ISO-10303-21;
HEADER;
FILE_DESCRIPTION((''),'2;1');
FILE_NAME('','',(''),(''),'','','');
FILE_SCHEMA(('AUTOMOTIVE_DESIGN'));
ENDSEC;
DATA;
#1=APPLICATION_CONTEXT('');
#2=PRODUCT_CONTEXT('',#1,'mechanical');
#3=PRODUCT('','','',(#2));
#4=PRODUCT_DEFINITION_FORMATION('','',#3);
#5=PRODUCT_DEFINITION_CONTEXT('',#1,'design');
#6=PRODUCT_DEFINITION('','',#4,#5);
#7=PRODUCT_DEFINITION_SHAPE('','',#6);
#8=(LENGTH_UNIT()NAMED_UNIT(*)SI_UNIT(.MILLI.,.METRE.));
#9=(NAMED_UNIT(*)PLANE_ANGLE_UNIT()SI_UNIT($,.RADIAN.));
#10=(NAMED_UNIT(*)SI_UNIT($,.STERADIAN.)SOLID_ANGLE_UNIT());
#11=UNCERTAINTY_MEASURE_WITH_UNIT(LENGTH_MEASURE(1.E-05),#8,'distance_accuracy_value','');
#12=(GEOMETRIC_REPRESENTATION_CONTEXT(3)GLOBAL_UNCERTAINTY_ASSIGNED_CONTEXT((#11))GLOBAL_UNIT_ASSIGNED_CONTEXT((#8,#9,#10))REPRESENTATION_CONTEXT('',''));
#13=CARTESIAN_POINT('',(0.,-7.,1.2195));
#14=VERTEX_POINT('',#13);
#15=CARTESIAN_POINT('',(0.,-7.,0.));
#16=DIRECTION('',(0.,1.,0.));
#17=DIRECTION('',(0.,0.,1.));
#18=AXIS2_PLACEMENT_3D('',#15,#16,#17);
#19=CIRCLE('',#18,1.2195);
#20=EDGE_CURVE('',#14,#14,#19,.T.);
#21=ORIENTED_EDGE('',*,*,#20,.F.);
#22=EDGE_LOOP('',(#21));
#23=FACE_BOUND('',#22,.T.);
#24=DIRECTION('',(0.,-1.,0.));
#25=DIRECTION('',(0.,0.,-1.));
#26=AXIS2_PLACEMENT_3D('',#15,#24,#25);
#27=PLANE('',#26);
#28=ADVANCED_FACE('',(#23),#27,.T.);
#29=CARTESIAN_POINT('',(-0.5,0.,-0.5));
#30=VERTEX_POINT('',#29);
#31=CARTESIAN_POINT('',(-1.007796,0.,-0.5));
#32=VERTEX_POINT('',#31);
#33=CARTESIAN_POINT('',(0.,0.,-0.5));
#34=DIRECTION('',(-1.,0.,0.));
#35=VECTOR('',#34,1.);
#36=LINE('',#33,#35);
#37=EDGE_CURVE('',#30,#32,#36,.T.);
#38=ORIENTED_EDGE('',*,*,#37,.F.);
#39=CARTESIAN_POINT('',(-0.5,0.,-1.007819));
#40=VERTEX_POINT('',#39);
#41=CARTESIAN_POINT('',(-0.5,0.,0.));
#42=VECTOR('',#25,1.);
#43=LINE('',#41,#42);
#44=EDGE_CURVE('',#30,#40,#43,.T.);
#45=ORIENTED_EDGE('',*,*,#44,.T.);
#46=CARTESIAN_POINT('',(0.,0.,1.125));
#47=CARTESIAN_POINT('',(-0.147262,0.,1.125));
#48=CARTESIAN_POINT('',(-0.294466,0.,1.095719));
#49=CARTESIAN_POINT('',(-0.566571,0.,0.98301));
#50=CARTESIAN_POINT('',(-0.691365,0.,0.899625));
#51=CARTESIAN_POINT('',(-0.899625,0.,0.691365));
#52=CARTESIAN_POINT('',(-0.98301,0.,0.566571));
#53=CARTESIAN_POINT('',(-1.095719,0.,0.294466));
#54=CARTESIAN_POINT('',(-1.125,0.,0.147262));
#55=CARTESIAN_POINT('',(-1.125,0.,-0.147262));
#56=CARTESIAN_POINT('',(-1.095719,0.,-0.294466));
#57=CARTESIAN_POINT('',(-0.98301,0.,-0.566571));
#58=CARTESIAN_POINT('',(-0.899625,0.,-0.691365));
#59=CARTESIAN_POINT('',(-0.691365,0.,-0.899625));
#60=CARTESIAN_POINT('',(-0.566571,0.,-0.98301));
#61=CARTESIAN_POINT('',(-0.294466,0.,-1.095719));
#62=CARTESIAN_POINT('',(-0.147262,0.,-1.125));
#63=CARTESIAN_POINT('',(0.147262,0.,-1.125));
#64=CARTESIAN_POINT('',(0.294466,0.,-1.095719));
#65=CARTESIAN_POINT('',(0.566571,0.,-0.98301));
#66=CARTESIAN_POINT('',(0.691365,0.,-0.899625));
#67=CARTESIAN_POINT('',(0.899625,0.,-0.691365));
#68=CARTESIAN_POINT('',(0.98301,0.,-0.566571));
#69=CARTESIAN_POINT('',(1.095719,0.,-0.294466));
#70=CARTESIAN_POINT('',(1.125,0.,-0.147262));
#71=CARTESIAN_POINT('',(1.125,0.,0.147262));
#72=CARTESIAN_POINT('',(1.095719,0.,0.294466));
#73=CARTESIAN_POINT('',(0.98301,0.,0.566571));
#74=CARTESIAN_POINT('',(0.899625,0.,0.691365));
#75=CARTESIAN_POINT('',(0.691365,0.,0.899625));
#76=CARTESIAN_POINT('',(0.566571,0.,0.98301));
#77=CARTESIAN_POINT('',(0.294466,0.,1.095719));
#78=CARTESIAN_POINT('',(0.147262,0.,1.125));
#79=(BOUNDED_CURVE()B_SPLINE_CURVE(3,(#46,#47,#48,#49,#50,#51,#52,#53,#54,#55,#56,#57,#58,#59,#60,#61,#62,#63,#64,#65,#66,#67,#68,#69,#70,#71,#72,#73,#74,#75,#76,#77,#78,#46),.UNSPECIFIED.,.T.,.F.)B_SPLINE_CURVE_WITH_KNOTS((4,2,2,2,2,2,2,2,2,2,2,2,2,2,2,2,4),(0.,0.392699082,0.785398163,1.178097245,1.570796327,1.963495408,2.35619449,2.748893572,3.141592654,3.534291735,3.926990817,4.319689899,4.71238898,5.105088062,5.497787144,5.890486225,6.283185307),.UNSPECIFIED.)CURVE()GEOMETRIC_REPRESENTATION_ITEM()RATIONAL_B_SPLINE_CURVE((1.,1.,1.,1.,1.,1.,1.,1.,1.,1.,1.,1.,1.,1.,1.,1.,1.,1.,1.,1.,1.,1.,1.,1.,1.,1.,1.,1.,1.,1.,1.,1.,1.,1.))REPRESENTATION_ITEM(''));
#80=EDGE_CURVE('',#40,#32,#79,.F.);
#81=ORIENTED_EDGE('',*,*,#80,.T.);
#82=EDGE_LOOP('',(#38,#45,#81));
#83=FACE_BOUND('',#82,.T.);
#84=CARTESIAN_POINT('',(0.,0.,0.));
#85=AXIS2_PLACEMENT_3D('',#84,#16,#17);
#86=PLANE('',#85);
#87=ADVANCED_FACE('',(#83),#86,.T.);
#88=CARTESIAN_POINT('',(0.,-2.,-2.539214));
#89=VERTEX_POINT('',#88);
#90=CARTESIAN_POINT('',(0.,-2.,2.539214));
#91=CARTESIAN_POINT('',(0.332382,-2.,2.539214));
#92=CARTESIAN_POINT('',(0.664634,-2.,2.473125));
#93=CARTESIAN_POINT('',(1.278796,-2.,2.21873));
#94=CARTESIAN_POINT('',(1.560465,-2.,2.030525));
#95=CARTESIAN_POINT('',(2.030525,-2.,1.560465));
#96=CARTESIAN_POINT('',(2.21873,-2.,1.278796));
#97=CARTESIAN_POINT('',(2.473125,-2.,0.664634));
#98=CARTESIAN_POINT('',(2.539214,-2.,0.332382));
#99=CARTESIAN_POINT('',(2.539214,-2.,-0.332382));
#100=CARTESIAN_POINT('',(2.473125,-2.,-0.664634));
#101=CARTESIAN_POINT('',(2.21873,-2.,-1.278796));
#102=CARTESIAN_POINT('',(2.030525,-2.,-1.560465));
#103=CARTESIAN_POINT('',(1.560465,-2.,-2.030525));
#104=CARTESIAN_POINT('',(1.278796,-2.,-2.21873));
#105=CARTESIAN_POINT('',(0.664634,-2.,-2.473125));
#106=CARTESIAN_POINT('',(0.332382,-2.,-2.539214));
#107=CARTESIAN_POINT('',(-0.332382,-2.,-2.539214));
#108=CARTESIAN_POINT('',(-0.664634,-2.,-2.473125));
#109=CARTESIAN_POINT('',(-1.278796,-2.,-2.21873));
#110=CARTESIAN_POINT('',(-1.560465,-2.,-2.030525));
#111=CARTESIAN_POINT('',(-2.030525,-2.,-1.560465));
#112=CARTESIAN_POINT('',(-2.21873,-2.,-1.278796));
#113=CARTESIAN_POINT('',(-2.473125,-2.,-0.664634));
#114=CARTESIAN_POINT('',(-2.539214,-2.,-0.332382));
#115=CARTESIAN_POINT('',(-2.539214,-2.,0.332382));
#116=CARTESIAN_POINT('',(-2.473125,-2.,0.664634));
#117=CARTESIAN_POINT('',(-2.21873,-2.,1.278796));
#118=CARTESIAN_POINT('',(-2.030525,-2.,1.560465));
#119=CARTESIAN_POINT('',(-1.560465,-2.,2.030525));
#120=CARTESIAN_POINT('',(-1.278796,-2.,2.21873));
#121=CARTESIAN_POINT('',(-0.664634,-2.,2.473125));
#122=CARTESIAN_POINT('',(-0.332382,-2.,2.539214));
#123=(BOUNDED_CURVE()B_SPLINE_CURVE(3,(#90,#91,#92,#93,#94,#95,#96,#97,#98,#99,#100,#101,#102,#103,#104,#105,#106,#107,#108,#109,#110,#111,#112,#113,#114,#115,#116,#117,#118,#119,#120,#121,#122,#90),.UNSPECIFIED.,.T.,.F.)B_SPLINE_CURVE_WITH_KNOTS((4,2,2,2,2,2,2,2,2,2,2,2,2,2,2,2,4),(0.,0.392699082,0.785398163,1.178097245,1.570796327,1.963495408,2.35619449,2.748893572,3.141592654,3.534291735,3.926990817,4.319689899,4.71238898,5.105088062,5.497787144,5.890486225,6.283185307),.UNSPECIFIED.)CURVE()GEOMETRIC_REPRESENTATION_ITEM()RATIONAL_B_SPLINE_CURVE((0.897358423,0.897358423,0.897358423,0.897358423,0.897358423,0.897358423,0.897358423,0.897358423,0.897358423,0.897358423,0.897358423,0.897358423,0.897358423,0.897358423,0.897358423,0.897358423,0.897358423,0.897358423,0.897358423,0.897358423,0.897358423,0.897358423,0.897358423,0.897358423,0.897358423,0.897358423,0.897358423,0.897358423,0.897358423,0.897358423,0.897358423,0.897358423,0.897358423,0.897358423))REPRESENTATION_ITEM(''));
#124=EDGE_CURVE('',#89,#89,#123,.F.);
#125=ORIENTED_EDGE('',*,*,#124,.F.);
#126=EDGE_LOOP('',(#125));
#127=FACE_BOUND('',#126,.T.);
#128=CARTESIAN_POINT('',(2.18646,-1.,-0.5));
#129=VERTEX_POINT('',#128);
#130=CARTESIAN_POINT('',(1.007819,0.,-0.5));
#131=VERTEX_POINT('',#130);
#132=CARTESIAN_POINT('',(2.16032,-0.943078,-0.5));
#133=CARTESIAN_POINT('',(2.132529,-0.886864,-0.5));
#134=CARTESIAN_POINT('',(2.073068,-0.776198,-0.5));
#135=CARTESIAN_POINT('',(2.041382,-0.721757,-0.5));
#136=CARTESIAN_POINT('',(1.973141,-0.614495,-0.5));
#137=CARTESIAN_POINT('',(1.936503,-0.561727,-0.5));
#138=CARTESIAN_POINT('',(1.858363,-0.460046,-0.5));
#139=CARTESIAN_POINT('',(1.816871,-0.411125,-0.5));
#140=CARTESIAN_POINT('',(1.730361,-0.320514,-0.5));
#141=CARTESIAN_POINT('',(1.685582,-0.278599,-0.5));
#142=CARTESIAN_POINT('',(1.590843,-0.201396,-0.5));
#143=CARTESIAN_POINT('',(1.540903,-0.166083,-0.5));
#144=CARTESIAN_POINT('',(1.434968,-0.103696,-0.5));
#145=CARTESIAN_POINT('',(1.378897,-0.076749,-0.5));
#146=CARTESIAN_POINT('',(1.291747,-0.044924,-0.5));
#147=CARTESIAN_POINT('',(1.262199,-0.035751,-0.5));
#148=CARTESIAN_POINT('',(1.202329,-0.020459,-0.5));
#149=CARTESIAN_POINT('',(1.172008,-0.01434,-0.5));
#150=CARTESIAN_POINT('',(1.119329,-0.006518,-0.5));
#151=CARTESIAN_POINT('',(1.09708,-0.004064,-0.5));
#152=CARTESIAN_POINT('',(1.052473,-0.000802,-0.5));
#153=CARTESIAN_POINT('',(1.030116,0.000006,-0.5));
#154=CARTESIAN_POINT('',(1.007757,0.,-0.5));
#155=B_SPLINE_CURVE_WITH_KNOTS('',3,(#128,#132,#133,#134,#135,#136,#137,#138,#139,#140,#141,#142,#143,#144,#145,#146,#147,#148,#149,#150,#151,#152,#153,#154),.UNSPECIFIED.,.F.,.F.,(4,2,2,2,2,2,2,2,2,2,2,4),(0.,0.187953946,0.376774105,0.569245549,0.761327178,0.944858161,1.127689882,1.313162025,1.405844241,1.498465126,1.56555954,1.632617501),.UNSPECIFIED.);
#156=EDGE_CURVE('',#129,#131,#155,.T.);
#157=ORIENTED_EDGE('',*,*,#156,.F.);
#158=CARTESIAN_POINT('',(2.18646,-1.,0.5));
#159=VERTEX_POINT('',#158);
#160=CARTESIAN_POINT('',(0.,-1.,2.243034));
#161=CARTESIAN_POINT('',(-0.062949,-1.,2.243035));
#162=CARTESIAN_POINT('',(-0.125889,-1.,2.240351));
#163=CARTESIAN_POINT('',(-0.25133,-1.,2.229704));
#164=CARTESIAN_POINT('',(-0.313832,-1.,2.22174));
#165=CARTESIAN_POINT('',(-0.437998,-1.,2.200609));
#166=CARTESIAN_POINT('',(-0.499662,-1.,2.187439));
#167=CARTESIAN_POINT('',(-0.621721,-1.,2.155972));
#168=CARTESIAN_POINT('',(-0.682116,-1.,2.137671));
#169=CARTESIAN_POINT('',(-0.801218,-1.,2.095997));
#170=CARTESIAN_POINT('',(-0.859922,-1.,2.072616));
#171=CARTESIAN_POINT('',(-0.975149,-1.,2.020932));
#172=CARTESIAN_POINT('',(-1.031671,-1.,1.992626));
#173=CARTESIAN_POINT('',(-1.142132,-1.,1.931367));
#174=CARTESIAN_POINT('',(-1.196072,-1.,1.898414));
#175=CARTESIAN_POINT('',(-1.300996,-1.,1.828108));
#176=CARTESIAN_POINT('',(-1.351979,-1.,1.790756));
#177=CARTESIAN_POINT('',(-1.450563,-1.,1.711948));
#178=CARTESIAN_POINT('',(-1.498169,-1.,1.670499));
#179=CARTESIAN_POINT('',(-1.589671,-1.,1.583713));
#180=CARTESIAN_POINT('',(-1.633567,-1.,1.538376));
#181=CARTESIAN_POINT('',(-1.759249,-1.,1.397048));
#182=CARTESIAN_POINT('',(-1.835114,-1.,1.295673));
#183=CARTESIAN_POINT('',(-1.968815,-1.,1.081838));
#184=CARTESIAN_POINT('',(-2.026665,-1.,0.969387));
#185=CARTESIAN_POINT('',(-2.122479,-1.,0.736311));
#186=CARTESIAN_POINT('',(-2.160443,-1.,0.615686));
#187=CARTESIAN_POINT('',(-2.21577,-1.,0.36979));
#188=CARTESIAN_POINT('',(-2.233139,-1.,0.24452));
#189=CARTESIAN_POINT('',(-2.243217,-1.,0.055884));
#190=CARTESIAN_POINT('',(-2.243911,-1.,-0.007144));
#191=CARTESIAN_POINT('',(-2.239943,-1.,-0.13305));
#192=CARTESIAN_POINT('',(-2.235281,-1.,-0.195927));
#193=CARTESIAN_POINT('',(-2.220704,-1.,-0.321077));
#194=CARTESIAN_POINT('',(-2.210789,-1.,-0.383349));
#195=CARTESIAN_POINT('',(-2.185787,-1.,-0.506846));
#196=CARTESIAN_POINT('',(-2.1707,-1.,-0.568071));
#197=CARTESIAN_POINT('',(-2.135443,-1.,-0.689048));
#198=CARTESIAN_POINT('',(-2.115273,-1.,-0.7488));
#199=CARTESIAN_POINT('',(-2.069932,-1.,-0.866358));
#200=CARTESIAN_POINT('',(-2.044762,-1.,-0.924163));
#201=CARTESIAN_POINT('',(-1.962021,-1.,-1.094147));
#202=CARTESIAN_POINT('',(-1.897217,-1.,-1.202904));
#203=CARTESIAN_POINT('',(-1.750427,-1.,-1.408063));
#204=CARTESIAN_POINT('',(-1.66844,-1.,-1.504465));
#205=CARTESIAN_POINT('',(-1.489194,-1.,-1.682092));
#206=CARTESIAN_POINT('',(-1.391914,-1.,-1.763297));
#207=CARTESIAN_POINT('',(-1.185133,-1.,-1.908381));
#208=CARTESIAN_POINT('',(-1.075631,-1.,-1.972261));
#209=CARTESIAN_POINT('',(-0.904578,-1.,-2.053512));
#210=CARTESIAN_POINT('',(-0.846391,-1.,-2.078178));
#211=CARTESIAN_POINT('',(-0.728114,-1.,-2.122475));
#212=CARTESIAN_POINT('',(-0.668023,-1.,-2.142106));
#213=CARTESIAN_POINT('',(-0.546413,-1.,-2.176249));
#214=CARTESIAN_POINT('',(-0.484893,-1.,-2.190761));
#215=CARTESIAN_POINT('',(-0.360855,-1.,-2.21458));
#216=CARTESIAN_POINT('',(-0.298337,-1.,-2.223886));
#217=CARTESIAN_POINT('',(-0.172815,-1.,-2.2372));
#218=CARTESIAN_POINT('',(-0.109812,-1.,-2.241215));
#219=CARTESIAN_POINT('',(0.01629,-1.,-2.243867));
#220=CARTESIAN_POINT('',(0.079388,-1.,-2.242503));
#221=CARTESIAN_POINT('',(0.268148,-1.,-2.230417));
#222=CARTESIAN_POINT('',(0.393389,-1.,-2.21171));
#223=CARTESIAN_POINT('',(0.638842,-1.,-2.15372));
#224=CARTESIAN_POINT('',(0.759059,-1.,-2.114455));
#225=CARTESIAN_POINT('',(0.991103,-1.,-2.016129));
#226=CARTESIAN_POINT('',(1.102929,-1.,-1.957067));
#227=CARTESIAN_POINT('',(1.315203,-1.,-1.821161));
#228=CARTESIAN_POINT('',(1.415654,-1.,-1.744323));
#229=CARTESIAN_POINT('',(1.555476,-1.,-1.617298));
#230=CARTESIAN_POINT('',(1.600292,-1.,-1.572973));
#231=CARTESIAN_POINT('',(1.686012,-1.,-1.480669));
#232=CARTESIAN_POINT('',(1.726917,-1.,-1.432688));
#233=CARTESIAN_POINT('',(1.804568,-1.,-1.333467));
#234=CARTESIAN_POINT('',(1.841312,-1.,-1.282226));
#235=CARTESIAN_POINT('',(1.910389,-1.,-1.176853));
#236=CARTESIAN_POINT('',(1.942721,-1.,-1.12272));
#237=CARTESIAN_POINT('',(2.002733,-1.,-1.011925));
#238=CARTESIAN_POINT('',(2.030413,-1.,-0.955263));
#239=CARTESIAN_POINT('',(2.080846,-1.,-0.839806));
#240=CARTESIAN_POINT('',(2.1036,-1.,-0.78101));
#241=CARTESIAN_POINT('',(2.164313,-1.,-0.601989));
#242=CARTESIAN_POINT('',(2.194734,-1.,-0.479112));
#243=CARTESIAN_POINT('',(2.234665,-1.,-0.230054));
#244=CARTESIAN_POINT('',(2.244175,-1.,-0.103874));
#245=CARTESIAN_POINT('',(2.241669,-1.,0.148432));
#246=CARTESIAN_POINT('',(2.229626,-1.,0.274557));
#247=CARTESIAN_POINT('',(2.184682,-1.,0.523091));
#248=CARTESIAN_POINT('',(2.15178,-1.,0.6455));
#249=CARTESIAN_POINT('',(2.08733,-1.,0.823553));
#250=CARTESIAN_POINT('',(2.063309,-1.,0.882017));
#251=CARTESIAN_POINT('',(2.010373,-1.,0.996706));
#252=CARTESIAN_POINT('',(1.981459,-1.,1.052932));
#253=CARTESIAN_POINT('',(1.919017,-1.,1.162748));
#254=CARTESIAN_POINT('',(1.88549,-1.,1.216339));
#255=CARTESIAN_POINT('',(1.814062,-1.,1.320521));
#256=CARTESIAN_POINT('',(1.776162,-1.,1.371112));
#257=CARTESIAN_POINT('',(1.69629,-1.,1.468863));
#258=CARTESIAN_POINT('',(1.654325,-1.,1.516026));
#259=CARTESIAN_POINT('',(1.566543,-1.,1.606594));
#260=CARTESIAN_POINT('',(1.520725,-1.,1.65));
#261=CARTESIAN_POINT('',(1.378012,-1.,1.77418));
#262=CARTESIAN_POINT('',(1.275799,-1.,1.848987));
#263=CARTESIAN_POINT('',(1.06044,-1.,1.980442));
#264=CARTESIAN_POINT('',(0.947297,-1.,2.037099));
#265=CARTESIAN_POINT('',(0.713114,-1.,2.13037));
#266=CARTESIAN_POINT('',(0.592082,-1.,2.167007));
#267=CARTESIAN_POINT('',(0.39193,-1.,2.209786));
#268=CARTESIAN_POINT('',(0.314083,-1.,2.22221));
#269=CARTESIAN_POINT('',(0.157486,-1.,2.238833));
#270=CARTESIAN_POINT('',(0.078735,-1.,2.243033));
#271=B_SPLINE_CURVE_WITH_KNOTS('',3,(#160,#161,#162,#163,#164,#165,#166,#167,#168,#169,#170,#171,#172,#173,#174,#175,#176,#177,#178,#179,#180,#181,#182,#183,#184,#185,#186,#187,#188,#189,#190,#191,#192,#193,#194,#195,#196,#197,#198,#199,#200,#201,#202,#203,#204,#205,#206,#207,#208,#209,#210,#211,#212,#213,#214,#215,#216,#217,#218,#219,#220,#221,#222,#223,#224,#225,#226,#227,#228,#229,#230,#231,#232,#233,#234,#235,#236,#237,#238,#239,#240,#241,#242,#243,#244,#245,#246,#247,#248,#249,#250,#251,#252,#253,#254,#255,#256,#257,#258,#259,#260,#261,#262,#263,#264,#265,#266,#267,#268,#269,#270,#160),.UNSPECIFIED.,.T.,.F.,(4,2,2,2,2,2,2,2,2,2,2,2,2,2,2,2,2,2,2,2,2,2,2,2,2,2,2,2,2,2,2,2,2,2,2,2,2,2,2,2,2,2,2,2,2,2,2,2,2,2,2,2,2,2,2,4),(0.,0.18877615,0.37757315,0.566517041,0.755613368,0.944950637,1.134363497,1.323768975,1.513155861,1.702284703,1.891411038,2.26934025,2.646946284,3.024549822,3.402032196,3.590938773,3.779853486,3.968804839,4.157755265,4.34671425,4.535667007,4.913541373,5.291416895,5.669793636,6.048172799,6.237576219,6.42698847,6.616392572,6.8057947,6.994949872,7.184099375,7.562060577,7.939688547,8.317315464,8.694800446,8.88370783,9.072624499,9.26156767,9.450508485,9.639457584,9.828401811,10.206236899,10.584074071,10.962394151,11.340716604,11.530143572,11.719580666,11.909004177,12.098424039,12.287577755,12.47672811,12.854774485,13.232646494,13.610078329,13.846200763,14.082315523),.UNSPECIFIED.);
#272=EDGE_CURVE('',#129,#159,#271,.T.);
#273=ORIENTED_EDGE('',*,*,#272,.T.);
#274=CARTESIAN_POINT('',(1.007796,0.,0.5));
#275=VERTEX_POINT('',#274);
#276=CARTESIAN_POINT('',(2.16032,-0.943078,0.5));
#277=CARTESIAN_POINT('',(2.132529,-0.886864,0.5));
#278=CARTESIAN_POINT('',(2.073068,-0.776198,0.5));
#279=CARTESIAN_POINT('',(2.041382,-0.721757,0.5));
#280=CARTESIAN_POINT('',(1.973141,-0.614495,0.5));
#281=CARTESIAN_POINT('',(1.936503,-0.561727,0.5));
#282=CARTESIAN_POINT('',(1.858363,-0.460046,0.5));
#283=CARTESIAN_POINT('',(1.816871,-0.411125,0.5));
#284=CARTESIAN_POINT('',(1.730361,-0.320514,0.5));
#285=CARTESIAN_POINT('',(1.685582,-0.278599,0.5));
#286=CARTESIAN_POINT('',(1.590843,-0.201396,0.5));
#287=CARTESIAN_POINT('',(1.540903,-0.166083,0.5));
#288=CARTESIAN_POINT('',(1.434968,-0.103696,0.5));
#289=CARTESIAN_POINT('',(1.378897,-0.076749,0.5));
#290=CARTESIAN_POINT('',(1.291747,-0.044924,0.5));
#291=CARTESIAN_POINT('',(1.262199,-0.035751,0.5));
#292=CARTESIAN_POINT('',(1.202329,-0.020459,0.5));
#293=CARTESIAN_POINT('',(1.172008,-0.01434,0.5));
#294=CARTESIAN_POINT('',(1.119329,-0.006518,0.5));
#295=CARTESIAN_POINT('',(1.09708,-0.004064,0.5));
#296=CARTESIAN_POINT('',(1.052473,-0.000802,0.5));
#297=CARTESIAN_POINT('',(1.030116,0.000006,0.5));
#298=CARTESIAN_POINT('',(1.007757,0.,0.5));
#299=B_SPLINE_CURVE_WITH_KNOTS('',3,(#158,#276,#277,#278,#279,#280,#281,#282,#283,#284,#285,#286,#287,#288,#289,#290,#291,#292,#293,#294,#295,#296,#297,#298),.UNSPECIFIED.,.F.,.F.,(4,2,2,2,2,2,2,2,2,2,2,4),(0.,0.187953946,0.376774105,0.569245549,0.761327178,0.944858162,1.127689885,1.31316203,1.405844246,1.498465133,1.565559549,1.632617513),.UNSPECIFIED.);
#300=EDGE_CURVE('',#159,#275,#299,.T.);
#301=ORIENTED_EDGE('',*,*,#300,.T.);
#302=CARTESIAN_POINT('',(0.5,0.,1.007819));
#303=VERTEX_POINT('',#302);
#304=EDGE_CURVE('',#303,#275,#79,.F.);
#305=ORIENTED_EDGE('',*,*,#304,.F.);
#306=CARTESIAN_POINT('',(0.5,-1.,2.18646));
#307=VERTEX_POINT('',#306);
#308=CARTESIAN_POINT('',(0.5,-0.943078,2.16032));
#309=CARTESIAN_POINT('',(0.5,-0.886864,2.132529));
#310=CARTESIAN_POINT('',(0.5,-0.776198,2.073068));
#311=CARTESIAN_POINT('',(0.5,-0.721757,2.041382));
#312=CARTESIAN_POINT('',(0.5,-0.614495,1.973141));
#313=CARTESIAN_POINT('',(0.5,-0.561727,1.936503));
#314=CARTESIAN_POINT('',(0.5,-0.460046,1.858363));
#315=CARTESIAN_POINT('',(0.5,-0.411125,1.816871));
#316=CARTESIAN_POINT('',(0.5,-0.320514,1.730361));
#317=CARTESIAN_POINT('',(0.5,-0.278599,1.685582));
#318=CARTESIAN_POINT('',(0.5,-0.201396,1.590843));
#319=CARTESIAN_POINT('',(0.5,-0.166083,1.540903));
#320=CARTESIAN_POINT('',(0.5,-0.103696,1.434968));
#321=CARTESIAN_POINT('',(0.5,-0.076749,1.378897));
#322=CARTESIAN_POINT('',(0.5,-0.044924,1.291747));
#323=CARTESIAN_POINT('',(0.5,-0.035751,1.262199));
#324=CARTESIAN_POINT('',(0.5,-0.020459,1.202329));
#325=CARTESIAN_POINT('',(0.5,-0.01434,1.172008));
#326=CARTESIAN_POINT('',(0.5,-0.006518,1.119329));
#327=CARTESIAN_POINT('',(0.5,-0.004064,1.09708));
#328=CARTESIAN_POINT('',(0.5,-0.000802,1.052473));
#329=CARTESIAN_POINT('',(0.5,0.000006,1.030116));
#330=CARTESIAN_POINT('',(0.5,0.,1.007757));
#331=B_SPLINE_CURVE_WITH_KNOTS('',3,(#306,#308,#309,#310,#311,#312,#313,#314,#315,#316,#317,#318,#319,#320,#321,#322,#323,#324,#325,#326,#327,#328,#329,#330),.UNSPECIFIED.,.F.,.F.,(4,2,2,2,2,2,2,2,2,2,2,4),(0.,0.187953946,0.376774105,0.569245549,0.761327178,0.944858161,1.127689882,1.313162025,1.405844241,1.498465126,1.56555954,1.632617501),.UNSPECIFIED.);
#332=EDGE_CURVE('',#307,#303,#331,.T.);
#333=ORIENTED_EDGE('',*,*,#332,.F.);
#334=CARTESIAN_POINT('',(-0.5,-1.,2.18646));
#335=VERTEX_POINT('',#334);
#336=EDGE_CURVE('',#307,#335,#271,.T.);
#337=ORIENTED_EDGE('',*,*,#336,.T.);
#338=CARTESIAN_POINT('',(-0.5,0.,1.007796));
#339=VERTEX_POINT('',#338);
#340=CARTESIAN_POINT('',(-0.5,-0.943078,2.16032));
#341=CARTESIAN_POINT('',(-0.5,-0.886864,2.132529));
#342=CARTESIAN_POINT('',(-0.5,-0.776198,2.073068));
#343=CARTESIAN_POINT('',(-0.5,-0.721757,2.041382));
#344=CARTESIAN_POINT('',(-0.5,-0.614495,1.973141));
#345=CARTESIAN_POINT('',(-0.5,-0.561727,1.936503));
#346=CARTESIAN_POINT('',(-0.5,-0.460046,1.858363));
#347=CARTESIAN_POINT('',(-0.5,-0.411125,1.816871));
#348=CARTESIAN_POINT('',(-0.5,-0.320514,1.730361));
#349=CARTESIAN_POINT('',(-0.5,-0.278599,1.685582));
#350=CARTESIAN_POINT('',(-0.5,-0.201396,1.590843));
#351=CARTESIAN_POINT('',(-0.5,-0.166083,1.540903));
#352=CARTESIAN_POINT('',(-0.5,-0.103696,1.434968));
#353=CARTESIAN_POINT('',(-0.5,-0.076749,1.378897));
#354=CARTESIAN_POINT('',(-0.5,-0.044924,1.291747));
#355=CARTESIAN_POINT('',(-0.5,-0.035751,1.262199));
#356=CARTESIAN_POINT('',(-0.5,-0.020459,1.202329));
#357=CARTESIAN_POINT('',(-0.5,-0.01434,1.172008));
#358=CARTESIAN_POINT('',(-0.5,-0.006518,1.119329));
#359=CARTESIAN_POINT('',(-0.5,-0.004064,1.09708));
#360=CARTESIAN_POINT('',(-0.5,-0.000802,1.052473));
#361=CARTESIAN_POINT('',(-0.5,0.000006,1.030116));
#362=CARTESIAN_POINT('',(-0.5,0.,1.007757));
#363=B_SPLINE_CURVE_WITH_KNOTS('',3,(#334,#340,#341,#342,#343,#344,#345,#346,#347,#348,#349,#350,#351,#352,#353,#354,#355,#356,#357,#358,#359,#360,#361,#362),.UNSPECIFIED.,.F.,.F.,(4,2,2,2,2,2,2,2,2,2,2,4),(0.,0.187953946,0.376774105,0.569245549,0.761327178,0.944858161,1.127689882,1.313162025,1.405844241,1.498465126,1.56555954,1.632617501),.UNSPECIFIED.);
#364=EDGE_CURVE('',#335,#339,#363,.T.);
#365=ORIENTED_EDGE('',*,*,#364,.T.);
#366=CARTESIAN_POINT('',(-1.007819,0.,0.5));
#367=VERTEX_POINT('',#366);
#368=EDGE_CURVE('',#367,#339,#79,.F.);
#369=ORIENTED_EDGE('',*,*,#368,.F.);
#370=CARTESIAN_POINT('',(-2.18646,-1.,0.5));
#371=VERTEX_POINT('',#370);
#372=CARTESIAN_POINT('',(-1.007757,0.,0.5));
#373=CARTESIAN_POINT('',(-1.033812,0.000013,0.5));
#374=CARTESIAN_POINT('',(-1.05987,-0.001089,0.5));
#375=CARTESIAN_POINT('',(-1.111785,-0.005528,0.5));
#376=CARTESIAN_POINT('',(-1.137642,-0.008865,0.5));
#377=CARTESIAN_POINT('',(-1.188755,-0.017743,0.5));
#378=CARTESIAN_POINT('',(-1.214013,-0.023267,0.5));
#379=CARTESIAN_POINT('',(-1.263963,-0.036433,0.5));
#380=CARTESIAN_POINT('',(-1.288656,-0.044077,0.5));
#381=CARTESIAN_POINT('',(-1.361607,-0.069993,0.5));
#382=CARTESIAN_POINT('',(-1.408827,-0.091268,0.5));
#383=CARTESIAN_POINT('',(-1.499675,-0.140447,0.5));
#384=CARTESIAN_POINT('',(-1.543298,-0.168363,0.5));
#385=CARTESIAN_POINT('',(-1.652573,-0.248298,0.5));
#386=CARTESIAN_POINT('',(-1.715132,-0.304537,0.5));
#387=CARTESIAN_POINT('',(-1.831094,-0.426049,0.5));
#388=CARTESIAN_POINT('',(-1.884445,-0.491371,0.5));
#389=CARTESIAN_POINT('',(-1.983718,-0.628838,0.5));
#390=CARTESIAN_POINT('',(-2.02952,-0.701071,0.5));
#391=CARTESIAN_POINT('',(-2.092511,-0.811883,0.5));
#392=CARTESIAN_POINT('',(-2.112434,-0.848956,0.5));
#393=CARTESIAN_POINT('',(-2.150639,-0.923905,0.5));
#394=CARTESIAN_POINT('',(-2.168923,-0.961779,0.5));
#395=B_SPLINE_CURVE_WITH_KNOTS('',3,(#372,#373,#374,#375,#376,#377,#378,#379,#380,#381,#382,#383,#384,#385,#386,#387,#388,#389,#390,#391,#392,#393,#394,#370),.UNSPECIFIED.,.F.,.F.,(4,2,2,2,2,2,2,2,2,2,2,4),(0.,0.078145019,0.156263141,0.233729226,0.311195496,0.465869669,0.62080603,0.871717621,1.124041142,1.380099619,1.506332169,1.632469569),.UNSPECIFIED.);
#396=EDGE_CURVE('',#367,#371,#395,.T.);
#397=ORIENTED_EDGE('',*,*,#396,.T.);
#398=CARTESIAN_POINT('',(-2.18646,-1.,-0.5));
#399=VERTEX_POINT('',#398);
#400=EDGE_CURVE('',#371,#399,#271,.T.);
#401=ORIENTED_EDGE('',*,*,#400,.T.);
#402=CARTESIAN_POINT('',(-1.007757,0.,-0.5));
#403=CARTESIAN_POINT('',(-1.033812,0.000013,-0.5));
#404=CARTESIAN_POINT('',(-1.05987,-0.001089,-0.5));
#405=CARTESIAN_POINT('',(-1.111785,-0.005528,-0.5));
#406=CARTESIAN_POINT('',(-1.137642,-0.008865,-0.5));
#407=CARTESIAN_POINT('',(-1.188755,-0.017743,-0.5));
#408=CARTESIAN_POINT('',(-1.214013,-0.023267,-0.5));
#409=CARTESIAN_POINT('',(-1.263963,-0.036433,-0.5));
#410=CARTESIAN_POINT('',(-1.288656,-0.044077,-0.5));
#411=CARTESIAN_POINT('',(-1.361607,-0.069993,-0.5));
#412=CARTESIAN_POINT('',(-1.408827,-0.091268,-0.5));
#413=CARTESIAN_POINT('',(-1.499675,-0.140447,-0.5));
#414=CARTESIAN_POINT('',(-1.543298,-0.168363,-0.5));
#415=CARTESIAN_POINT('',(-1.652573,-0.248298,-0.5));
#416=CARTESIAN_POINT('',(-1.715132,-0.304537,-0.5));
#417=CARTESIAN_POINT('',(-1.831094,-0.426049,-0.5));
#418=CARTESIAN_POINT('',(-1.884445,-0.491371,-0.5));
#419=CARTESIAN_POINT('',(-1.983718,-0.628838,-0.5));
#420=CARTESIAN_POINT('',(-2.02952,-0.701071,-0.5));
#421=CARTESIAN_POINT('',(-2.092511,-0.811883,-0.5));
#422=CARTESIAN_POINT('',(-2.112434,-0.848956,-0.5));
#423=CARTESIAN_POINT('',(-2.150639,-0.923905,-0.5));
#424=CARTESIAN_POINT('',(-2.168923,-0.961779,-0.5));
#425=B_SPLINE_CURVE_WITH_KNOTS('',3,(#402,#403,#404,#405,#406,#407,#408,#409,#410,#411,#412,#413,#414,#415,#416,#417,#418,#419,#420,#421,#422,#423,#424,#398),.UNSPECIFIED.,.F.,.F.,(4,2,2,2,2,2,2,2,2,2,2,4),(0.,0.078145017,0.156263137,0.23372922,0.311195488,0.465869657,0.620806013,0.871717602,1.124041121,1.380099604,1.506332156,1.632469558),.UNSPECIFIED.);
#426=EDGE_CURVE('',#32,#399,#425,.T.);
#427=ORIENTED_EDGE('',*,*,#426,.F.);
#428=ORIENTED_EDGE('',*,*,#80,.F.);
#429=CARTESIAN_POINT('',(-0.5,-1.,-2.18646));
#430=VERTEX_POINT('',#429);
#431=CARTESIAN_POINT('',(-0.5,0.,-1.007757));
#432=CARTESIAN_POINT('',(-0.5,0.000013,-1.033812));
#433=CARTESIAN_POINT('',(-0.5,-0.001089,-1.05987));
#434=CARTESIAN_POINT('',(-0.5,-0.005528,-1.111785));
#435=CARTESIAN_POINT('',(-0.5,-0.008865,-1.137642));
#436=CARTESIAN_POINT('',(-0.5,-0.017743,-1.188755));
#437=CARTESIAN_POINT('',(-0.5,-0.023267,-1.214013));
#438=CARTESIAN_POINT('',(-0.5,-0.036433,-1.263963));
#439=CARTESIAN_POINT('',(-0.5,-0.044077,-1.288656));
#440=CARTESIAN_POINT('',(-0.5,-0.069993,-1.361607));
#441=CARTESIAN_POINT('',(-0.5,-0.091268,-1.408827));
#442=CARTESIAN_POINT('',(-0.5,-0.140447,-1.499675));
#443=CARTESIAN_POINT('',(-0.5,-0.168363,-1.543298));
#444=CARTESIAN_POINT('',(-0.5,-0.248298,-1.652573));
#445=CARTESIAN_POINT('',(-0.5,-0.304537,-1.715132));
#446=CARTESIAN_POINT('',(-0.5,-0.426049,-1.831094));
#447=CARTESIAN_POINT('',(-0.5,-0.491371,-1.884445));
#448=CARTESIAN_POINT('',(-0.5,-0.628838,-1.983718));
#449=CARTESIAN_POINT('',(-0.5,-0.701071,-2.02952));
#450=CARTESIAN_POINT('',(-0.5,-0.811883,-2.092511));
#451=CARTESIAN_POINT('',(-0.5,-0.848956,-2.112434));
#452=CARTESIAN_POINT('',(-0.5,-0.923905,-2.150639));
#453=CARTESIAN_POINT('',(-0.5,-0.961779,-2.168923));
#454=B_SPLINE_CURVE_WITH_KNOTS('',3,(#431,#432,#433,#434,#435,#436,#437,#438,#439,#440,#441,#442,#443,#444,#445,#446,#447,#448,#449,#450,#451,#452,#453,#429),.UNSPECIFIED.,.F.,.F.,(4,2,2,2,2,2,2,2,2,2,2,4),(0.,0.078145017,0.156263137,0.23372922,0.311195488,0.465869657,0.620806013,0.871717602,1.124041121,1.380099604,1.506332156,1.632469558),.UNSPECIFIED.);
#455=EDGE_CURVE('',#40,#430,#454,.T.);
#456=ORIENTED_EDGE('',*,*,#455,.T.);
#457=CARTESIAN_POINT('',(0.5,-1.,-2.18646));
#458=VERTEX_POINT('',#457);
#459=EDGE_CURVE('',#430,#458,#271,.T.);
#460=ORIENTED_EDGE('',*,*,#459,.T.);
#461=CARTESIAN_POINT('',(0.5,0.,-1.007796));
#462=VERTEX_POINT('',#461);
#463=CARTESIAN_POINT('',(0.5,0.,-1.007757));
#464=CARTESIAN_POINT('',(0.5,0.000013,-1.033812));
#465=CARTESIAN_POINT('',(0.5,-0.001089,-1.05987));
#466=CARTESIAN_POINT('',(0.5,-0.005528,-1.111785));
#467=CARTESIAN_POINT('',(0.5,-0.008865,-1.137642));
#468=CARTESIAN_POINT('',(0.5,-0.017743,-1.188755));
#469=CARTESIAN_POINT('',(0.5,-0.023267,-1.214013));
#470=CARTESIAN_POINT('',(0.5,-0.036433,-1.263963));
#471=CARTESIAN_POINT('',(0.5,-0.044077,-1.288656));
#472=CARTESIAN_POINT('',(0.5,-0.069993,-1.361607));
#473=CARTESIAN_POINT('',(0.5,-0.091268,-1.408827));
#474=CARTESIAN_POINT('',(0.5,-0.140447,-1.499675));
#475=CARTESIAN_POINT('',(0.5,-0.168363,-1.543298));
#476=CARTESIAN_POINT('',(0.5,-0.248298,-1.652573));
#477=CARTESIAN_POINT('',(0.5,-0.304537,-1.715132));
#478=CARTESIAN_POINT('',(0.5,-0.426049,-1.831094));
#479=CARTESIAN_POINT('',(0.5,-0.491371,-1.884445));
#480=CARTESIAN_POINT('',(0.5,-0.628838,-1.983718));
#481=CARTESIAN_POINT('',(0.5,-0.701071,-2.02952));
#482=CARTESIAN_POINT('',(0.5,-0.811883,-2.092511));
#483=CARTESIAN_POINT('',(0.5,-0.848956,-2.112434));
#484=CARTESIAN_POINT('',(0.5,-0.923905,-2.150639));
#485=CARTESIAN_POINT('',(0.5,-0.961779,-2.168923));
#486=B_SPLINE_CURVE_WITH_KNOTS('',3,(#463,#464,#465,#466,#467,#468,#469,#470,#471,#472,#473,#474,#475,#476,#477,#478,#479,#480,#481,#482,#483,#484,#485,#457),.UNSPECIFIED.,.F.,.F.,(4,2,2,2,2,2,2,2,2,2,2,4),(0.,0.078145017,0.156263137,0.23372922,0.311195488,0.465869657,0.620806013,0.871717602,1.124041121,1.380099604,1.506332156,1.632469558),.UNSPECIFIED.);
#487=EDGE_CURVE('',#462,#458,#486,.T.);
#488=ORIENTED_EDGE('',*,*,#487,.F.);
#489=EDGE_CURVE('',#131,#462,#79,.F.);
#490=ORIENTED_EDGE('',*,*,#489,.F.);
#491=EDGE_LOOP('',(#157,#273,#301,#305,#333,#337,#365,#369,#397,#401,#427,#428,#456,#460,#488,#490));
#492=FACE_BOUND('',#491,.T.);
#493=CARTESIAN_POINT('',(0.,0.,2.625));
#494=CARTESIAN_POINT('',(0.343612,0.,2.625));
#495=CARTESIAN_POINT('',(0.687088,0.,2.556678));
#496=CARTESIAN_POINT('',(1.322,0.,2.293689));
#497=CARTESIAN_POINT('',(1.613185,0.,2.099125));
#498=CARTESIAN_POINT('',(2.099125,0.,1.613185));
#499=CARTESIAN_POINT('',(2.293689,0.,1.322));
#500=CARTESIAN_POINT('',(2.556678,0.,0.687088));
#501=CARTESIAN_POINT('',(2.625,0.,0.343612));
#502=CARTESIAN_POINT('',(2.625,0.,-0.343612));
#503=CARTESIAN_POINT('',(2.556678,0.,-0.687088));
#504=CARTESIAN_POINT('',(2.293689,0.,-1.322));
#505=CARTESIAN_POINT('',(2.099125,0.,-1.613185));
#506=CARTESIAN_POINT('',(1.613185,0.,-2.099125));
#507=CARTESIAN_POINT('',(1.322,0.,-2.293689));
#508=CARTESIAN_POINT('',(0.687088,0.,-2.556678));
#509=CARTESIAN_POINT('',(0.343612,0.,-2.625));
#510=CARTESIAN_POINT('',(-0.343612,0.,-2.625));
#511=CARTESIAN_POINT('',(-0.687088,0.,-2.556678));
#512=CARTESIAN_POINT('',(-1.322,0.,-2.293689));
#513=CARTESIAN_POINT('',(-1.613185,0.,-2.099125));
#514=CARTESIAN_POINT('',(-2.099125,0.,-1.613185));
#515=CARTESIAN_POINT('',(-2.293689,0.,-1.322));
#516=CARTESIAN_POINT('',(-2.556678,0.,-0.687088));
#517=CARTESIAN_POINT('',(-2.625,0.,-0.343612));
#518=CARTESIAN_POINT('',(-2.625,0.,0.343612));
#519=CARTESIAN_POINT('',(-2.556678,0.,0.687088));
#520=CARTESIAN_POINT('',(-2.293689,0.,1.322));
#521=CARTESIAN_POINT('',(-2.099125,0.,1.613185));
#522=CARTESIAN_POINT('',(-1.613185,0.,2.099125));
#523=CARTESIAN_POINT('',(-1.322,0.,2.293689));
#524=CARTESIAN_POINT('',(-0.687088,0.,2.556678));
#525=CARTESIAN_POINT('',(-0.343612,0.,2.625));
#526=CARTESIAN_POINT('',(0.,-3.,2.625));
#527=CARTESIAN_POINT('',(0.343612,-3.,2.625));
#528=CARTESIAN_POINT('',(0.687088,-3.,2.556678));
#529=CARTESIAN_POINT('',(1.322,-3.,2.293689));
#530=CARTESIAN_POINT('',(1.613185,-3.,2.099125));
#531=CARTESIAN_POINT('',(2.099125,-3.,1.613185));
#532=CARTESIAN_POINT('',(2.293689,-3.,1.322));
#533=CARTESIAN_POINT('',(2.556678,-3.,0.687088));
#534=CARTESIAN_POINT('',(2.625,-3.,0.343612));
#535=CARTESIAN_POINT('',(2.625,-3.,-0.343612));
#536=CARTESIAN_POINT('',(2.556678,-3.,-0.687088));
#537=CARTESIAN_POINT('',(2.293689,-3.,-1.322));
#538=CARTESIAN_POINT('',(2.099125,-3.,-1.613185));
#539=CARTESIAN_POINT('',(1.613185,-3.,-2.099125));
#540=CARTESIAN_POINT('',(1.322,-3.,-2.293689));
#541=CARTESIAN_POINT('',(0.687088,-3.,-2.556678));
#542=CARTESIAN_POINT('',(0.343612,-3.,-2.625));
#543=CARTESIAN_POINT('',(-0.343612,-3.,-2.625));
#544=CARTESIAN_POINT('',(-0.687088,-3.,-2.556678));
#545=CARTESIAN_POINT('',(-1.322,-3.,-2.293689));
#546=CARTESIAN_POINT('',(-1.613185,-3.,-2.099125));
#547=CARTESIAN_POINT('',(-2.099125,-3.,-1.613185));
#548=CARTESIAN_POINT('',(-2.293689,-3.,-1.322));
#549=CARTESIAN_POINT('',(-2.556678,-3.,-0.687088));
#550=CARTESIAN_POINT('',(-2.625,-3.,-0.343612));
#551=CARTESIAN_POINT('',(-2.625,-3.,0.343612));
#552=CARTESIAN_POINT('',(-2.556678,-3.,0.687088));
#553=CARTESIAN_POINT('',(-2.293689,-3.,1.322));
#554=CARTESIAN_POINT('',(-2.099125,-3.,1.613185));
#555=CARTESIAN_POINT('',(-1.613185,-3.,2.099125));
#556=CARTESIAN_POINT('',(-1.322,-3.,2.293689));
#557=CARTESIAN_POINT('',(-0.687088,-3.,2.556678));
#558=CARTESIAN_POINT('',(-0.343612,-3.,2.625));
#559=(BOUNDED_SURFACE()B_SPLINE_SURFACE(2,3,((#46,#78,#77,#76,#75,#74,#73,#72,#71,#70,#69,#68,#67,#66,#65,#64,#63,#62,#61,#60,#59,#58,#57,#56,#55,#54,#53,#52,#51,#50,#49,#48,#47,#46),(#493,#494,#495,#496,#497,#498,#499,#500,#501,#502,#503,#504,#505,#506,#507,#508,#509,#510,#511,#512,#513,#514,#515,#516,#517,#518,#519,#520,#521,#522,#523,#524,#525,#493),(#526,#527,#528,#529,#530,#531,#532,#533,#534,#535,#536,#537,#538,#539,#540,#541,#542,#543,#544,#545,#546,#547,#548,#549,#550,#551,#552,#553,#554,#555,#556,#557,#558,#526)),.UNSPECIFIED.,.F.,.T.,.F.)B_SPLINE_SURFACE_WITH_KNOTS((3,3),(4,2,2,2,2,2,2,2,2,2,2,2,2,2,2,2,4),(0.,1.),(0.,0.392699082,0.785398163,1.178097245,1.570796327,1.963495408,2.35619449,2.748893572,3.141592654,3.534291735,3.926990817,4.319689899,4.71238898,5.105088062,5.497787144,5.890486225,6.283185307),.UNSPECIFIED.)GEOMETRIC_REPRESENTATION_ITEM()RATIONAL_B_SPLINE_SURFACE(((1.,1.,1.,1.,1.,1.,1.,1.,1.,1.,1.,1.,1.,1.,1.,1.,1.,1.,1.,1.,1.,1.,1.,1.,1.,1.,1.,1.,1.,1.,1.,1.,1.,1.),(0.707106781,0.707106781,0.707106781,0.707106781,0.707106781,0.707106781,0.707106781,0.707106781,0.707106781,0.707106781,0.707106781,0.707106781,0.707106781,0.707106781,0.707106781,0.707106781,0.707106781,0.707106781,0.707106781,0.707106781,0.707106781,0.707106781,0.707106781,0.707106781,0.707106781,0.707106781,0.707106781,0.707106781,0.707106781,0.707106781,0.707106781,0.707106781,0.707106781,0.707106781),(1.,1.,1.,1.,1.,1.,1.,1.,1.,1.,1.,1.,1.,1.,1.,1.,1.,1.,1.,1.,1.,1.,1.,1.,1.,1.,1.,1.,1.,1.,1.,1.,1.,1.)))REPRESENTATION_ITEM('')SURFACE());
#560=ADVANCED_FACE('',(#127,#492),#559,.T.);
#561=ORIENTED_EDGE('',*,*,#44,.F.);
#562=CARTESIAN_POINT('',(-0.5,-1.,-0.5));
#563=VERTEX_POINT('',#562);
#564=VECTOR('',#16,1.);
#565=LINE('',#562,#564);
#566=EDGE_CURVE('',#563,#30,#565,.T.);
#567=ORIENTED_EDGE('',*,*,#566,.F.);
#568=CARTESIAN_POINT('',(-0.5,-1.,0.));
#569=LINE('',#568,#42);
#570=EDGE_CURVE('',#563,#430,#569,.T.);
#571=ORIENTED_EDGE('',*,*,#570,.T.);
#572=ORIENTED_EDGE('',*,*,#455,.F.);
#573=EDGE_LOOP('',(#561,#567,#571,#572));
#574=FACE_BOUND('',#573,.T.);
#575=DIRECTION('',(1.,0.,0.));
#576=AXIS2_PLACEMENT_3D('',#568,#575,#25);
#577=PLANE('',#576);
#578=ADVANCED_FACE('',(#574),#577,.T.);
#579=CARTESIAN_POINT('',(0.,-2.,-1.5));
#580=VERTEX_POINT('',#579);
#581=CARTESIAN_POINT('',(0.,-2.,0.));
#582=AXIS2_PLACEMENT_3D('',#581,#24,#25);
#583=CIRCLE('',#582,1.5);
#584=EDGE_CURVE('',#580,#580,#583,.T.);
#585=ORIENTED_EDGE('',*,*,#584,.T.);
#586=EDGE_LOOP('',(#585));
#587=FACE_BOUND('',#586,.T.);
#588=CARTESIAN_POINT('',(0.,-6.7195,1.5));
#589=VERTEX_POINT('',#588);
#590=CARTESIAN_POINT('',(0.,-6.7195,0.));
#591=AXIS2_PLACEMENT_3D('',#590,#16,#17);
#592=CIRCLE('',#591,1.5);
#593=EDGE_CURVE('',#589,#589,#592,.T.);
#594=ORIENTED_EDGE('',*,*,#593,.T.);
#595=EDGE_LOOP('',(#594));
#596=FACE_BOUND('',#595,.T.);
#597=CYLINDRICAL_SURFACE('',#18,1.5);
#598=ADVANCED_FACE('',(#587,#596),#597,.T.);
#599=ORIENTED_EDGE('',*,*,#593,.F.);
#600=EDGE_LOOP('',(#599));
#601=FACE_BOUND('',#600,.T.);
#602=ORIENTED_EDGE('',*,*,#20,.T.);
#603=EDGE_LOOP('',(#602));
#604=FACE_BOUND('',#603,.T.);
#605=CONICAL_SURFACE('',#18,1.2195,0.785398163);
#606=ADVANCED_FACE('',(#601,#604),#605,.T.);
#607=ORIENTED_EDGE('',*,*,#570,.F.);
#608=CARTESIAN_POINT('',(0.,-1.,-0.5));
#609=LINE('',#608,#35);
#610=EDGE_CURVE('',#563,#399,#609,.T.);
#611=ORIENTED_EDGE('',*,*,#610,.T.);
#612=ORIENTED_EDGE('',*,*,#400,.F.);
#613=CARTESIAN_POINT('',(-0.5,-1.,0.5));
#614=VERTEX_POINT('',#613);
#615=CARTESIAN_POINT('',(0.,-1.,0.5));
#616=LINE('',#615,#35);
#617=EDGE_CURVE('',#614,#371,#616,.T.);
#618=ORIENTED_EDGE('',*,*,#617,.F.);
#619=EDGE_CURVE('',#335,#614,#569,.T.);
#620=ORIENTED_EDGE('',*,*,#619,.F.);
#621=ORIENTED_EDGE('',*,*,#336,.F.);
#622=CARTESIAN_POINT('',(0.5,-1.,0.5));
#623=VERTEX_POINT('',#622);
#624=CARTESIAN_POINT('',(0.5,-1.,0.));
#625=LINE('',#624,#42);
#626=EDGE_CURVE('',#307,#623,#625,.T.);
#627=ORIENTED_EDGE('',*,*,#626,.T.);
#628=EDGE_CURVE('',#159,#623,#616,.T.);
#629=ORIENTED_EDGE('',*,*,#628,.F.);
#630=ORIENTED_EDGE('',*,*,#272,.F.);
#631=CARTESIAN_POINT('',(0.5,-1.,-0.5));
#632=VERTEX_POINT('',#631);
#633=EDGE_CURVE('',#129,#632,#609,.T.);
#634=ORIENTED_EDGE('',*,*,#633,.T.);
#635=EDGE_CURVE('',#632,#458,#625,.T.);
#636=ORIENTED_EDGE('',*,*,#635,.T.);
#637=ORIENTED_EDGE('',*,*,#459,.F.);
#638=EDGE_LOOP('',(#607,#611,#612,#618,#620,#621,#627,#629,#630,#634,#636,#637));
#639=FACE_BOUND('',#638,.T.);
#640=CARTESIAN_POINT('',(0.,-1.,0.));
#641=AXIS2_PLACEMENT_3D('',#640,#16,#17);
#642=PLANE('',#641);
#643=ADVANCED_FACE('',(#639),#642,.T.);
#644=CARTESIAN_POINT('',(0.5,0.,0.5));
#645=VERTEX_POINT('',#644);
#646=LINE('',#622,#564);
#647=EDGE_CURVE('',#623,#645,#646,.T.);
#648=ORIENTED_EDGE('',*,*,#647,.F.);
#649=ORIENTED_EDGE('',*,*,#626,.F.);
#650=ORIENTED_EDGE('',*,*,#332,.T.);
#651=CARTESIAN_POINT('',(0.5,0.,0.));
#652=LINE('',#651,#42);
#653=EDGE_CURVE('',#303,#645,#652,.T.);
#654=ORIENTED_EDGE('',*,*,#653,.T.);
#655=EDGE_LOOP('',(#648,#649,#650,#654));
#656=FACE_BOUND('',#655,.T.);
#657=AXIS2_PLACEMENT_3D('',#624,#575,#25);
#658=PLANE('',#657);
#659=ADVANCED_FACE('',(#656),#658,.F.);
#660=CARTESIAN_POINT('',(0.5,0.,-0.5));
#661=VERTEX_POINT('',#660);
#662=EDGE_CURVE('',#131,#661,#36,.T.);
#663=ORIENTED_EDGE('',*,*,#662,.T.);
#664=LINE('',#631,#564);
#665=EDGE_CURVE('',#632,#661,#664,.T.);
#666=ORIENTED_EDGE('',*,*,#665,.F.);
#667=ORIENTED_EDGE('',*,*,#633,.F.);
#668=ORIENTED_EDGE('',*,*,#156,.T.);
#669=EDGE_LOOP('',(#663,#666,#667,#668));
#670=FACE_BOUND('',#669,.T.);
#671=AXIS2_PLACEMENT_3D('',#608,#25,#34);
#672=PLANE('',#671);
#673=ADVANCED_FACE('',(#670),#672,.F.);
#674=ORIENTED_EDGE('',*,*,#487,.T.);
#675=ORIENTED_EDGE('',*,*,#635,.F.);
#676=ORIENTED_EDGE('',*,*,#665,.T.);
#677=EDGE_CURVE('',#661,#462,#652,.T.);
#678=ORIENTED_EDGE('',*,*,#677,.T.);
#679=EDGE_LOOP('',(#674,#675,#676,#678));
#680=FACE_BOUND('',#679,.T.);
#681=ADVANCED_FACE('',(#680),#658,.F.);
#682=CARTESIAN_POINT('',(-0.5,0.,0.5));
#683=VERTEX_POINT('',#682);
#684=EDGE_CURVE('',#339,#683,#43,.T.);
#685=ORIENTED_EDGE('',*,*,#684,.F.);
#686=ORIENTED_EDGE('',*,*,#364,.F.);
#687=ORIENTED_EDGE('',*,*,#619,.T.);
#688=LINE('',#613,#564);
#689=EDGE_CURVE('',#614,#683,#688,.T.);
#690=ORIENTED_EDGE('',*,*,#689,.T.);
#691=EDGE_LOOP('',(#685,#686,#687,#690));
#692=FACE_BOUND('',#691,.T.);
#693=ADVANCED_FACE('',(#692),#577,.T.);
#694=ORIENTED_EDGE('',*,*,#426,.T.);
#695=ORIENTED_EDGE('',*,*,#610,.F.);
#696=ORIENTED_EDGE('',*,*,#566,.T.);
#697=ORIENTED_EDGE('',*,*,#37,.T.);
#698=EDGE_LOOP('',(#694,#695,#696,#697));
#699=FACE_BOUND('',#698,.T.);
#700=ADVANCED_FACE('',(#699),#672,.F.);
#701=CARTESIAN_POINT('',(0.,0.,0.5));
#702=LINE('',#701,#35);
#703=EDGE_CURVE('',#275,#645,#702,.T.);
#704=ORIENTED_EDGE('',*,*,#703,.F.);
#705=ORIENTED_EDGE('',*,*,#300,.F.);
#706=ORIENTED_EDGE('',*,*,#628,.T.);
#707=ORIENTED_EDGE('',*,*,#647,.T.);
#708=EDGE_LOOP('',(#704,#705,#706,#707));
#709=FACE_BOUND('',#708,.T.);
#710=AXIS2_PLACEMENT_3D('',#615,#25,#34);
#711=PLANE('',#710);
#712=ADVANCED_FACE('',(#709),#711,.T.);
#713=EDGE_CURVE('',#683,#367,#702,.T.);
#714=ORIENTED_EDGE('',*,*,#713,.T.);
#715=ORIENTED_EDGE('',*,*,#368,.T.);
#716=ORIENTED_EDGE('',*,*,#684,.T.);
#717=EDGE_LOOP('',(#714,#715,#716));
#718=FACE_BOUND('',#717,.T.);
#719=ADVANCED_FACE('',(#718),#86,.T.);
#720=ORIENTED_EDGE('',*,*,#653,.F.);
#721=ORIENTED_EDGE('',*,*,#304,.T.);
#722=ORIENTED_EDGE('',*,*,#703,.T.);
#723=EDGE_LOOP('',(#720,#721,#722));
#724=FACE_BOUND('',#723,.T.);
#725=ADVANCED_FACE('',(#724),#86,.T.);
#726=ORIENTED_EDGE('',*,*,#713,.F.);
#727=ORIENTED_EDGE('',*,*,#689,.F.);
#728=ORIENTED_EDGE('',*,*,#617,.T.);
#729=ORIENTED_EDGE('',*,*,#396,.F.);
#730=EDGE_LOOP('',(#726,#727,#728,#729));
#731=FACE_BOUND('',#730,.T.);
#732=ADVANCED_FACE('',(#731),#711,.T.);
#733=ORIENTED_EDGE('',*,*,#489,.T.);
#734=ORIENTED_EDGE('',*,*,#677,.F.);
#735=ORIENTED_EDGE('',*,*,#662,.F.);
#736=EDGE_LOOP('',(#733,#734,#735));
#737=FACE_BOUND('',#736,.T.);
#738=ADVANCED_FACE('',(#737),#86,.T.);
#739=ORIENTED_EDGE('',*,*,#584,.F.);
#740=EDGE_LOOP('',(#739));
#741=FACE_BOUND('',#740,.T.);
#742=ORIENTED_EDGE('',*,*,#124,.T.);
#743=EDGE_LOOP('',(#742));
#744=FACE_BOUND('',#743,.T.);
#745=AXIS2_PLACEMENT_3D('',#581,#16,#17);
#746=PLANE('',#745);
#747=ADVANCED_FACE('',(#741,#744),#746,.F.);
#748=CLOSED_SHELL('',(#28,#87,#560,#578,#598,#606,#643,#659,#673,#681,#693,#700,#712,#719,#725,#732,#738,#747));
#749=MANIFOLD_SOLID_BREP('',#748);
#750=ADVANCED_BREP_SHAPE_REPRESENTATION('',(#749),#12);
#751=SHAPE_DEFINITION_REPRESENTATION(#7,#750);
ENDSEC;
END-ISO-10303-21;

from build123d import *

# Parameters (mm, degrees)
SKETCH1_R           = 2.625
BOSS_EXTRUDE1_DEPTH = 2
SKETCH2_R           = 1.5
BOSS_EXTRUDE2_DEPTH = 5
FILLET1_SIZE        = 3
FILLET1_SIZE_2      = 1.5
SKETCH4_W           = 1
SKETCH4_H           = 1
CUT_EXTRUDE1_DEPTH  = 1


# Read off the part's stored shape, not the designer's step: M3x0.5 Machine Threads Stud1
with BuildPart() as part:
    # Sketch1 → Boss-Extrude1 (new body)
    with BuildSketch(Plane(origin=(0, 0, 0), x_dir=(1, 0, 0), z_dir=(0, 1, 0))):
        with Locations(Location((0, 0, 0), (0, 0, 270))):
            Circle(SKETCH1_R)
    extrude(amount=-BOSS_EXTRUDE1_DEPTH)

    # Sketch2 → Boss-Extrude2 (add)
    with BuildSketch(Plane(origin=(0, -2, 0), x_dir=(-1, 0, 0), z_dir=(0, -1, 0))):
        with Locations(Location((0, 0, 0), (0, 0, 90))):
            Circle(SKETCH2_R)
    extrude(amount=BOSS_EXTRUDE2_DEPTH)

    # M3x0.5 Machine Threads Stud1 outline → M3x0.5 Machine Threads Stud1 (revolve, cut)
    with BuildSketch(Plane.XY):
        Polygon((1.5, -6.7195), (1.2195, -7), (1.5, -7), align=None)
    revolve(axis=Axis((0, 0, 0), (0, 1, 0)), mode=Mode.SUBTRACT)

    # Fillet1
    # an asymmetric fillet: 3, 1.5 mm, written as the material it takes off along each edge
    with BuildSketch(Plane(origin=(0, 0, 0), x_dir=(0, 0, 1), z_dir=(-1, 0, 0))) as fillet1_piece_1:
        with BuildLine():
            Bezier((2.625, -FILLET1_SIZE), (2.625, 0), (2.625 - FILLET1_SIZE_2, 0), weights=[1, 0.707106781, 1])
            Line((2.625 - FILLET1_SIZE_2, 0), (2.625, 0))
            Line((2.625, 0), (2.625, -FILLET1_SIZE))
        make_face()
    revolve(axis=Axis((0, 0, 0), (0, 1, 0)), mode=Mode.SUBTRACT)

    # Sketch4 → Cut-Extrude1 (cut)
    with BuildSketch(Plane(origin=(0, 0, 0), x_dir=(-1, 0, 0), z_dir=(0, 1, 0))):
        with BuildLine():
            Line((-3, 0.5), (-3, -0.5))
            Line((-3, -0.5), (-1.007782219, -0.5))
            ThreePointArc((-1.007782219, -0.5), (-1.125, 0), (-1.007782219, 0.5))
            Line((-1.007782219, 0.5), (-3, 0.5))
        make_face()
        with BuildLine():
            ThreePointArc((-1.007782219, 0.5), (-1.125, 0), (-1.007782219, -0.5))
            Line((-1.007782219, -0.5), (-0.5, -0.5))
            Line((-0.5, -0.5), (-0.5, 0.5))
            Line((-0.5, 0.5), (-1.007782219, 0.5))
        make_face()
        Rectangle(SKETCH4_W, SKETCH4_H)
        with BuildLine():
            Line((0.5, -0.5), (-0.5, -0.5))
            Line((-0.5, -0.5), (-0.5, -1.007782219))
            ThreePointArc((-0.5, -1.007782219), (0, -1.125), (0.5, -1.007782219))
            Line((0.5, -1.007782219), (0.5, -0.5))
        make_face()
        with BuildLine():
            ThreePointArc((0.5, -1.007782219), (0, -1.125), (-0.5, -1.007782219))
            Line((-0.5, -1.007782219), (-0.5, -3))
            Line((-0.5, -3), (0.5, -3))
            Line((0.5, -3), (0.5, -1.007782219))
        make_face()
        with BuildLine():
            Line((0.5, 0.5), (0.5, -0.5))
            Line((0.5, -0.5), (1.007782219, -0.5))
            ThreePointArc((1.007782219, -0.5), (1.09530361, -0.256778118), (1.125, 0))
            ThreePointArc((1.125, 0), (1.09530361, 0.256778118), (1.007782219, 0.5))
            Line((1.007782219, 0.5), (0.5, 0.5))
        make_face()
        with BuildLine():
            ThreePointArc((1.125, 0), (1.09530361, -0.256778118), (1.007782219, -0.5))
            Line((1.007782219, -0.5), (3, -0.5))
            Line((3, -0.5), (3, 0.5))
            Line((3, 0.5), (1.007782219, 0.5))
            ThreePointArc((1.007782219, 0.5), (1.09530361, 0.256778118), (1.125, 0))
        make_face()
        with BuildLine():
            Line((-0.5, 1.007782219), (-0.5, 0.5))
            Line((-0.5, 0.5), (0.5, 0.5))
            Line((0.5, 0.5), (0.5, 1.007782219))
            ThreePointArc((0.5, 1.007782219), (0, 1.125), (-0.5, 1.007782219))
        make_face()
        with BuildLine():
            Line((-0.5, 3), (-0.5, 1.007782219))
            ThreePointArc((-0.5, 1.007782219), (0, 1.125), (0.5, 1.007782219))
            Line((0.5, 1.007782219), (0.5, 3))
            Line((0.5, 3), (-0.5, 3))
        make_face()
    extrude(amount=-CUT_EXTRUDE1_DEPTH, mode=Mode.SUBTRACT)


solid = part.part
